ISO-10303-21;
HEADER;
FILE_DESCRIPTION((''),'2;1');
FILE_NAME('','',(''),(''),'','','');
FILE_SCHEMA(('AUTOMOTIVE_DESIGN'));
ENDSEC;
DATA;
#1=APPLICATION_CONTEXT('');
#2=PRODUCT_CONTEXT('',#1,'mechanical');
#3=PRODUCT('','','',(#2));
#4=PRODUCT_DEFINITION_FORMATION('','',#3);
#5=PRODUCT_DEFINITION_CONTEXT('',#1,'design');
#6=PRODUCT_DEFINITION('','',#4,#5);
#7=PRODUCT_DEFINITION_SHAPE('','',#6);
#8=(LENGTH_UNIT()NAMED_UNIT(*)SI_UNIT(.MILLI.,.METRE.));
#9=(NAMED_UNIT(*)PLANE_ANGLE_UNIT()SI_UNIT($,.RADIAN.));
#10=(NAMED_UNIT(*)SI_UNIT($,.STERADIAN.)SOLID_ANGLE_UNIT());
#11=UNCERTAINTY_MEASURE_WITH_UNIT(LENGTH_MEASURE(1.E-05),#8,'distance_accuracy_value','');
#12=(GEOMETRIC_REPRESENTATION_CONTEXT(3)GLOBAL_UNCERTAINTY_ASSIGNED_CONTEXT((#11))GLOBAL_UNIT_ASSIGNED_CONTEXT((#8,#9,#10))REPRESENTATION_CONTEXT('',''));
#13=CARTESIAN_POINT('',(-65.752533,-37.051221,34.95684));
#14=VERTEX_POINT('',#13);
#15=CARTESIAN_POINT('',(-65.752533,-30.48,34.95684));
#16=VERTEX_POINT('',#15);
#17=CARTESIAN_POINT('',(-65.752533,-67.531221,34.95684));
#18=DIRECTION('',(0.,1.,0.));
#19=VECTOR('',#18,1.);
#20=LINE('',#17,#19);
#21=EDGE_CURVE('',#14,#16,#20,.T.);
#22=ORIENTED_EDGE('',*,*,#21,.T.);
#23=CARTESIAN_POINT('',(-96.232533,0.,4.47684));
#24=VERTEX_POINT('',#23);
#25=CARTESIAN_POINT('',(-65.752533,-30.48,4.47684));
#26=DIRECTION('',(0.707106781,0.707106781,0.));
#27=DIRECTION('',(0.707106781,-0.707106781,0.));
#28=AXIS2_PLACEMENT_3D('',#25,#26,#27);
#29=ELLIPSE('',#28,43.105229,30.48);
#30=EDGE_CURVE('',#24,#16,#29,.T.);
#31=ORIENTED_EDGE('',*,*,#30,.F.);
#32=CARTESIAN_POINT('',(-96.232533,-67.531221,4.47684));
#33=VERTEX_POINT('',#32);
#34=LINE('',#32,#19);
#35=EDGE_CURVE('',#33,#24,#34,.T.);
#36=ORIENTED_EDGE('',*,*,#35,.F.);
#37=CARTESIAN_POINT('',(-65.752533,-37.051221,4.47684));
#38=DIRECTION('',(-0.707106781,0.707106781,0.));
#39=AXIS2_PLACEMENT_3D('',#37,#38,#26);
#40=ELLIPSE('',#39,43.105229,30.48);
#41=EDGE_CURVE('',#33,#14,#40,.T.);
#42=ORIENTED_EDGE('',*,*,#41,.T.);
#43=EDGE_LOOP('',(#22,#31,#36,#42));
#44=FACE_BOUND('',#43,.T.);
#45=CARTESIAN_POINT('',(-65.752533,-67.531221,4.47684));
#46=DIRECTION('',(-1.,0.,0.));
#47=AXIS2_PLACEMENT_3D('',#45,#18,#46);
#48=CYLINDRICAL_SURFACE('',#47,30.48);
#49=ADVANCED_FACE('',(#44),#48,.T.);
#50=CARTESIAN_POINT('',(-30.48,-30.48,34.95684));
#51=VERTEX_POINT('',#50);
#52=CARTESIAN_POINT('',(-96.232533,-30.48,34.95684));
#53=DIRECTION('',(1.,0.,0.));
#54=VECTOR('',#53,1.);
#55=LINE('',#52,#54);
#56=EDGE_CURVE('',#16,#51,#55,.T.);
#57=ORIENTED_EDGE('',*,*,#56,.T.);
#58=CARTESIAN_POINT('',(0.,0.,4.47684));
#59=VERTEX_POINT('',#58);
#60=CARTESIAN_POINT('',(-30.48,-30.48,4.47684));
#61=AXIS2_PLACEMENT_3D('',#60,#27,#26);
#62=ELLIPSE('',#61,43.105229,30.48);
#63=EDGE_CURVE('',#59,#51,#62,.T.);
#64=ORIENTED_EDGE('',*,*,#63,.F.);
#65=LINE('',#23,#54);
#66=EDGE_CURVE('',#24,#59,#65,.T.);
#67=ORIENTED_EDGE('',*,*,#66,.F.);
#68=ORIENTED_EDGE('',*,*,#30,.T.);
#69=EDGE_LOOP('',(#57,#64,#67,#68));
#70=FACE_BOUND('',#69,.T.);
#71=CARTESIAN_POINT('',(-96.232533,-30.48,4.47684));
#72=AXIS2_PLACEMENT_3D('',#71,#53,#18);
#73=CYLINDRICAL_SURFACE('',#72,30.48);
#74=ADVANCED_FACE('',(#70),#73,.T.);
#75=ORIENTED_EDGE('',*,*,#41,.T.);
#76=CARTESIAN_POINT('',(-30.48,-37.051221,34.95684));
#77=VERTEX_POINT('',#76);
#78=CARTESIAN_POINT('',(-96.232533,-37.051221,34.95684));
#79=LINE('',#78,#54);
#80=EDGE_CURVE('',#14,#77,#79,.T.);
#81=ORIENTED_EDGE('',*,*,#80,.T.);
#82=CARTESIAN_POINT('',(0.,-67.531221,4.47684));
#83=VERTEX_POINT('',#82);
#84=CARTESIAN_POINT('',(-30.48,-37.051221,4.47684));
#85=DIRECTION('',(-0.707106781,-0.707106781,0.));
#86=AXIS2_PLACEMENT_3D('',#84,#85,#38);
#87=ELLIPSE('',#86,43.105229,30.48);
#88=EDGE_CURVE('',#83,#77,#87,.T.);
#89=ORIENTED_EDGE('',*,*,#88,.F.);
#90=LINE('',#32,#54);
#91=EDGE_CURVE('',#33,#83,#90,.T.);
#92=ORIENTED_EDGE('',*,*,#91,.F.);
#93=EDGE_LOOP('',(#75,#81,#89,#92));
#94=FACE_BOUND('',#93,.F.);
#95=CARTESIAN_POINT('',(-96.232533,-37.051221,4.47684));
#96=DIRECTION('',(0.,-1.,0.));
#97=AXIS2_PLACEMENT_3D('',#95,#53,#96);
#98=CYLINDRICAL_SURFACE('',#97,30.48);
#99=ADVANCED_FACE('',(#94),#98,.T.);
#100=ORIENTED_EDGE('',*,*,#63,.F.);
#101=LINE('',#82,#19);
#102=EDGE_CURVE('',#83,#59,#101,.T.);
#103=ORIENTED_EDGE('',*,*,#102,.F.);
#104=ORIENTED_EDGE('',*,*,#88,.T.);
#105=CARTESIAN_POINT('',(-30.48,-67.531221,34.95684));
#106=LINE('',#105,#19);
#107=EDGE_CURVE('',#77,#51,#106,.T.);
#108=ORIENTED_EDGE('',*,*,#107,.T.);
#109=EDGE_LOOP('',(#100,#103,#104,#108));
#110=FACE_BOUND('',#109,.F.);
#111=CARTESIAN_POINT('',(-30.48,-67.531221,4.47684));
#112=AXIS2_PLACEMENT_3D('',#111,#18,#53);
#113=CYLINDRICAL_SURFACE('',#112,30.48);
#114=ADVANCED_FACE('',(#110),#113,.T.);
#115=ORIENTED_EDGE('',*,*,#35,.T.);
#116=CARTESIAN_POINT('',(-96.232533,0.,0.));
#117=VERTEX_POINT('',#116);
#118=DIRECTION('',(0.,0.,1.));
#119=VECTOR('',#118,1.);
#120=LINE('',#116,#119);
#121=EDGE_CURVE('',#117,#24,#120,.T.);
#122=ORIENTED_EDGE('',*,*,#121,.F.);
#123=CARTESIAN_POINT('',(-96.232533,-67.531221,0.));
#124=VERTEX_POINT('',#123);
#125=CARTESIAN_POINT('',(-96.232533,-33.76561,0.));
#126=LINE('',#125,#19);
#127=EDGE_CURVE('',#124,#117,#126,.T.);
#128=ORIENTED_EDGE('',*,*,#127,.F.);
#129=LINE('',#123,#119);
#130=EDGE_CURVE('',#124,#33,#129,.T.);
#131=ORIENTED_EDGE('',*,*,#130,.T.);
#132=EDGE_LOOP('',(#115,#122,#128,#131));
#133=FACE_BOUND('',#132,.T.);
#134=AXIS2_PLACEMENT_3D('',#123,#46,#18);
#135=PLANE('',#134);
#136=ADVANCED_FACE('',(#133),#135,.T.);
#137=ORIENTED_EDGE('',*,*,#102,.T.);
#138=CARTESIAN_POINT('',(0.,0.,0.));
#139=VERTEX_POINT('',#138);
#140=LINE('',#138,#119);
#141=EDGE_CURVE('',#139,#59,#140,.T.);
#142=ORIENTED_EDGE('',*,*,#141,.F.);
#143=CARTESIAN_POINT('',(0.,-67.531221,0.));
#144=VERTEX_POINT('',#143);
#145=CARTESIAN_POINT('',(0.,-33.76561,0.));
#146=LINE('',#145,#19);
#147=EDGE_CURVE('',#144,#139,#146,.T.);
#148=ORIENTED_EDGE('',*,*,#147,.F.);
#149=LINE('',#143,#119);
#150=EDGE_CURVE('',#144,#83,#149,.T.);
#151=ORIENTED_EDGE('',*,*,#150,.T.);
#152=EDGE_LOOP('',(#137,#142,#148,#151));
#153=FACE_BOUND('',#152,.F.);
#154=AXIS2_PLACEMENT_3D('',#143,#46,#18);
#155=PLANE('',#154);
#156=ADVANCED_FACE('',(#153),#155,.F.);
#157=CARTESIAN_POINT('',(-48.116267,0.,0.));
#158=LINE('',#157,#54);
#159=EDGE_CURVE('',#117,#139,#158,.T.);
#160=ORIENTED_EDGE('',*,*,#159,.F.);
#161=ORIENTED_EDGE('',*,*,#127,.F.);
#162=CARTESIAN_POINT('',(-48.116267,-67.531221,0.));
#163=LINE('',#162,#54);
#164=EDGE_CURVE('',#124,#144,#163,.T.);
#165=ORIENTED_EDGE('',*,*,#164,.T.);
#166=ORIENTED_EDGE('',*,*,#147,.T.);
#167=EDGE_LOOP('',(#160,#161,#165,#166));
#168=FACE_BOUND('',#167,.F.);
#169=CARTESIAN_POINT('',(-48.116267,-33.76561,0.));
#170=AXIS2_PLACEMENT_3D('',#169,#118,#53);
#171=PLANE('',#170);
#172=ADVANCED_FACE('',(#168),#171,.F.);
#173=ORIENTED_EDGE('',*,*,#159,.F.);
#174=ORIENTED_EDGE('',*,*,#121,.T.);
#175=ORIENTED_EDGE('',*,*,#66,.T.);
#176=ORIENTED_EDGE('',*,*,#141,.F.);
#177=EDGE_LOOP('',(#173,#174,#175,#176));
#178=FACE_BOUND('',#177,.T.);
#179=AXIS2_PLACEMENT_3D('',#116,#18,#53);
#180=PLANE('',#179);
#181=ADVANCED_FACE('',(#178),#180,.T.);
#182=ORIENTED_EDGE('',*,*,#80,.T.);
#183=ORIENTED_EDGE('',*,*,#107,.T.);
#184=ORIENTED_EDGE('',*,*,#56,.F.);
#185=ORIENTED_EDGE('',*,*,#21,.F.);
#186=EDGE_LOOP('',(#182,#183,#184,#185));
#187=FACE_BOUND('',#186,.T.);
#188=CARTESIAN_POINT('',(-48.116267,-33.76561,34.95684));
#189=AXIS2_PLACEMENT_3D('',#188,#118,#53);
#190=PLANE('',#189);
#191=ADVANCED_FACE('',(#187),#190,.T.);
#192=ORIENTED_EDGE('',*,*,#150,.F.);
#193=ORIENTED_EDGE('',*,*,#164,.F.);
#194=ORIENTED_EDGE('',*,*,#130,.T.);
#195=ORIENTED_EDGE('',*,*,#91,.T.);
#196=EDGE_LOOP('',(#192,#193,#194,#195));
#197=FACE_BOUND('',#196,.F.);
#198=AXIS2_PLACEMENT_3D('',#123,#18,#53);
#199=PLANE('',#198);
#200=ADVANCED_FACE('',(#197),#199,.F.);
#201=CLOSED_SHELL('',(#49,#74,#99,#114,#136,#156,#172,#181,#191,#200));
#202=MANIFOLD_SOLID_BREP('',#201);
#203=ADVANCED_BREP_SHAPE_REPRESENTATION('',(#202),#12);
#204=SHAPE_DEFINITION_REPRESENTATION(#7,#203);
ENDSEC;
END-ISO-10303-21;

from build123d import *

# Parameters (mm, degrees)
F0_W     = 96.2325334549
F0_H     = 67.5312206149
F1_DEPTH = 34.95684
F2_R     = 30.48


# Not quite as in the source:
# - a feature names something its author has since deleted; it is built from what else it names


with BuildPart() as f1:
    # F0 (on Top) → F1 (new body)
    with BuildSketch(Plane.XY):
        with Locations((-48.1162667274, -33.7656103075)):
            Rectangle(F0_W, F0_H)
    extrude(amount=F1_DEPTH)

    # F2
    f2_edges = [f1.edges().sort_by_distance(p)[0] for p in [
        (0, -33.76561, 34.95684),
        (-48.116267, 0, 34.95684),
        (-96.232533, -33.76561, 34.95684),
        (-48.116267, -67.531221, 34.95684),
    ]]
    fillet(f2_edges, radius=F2_R)


solid = f1.part
